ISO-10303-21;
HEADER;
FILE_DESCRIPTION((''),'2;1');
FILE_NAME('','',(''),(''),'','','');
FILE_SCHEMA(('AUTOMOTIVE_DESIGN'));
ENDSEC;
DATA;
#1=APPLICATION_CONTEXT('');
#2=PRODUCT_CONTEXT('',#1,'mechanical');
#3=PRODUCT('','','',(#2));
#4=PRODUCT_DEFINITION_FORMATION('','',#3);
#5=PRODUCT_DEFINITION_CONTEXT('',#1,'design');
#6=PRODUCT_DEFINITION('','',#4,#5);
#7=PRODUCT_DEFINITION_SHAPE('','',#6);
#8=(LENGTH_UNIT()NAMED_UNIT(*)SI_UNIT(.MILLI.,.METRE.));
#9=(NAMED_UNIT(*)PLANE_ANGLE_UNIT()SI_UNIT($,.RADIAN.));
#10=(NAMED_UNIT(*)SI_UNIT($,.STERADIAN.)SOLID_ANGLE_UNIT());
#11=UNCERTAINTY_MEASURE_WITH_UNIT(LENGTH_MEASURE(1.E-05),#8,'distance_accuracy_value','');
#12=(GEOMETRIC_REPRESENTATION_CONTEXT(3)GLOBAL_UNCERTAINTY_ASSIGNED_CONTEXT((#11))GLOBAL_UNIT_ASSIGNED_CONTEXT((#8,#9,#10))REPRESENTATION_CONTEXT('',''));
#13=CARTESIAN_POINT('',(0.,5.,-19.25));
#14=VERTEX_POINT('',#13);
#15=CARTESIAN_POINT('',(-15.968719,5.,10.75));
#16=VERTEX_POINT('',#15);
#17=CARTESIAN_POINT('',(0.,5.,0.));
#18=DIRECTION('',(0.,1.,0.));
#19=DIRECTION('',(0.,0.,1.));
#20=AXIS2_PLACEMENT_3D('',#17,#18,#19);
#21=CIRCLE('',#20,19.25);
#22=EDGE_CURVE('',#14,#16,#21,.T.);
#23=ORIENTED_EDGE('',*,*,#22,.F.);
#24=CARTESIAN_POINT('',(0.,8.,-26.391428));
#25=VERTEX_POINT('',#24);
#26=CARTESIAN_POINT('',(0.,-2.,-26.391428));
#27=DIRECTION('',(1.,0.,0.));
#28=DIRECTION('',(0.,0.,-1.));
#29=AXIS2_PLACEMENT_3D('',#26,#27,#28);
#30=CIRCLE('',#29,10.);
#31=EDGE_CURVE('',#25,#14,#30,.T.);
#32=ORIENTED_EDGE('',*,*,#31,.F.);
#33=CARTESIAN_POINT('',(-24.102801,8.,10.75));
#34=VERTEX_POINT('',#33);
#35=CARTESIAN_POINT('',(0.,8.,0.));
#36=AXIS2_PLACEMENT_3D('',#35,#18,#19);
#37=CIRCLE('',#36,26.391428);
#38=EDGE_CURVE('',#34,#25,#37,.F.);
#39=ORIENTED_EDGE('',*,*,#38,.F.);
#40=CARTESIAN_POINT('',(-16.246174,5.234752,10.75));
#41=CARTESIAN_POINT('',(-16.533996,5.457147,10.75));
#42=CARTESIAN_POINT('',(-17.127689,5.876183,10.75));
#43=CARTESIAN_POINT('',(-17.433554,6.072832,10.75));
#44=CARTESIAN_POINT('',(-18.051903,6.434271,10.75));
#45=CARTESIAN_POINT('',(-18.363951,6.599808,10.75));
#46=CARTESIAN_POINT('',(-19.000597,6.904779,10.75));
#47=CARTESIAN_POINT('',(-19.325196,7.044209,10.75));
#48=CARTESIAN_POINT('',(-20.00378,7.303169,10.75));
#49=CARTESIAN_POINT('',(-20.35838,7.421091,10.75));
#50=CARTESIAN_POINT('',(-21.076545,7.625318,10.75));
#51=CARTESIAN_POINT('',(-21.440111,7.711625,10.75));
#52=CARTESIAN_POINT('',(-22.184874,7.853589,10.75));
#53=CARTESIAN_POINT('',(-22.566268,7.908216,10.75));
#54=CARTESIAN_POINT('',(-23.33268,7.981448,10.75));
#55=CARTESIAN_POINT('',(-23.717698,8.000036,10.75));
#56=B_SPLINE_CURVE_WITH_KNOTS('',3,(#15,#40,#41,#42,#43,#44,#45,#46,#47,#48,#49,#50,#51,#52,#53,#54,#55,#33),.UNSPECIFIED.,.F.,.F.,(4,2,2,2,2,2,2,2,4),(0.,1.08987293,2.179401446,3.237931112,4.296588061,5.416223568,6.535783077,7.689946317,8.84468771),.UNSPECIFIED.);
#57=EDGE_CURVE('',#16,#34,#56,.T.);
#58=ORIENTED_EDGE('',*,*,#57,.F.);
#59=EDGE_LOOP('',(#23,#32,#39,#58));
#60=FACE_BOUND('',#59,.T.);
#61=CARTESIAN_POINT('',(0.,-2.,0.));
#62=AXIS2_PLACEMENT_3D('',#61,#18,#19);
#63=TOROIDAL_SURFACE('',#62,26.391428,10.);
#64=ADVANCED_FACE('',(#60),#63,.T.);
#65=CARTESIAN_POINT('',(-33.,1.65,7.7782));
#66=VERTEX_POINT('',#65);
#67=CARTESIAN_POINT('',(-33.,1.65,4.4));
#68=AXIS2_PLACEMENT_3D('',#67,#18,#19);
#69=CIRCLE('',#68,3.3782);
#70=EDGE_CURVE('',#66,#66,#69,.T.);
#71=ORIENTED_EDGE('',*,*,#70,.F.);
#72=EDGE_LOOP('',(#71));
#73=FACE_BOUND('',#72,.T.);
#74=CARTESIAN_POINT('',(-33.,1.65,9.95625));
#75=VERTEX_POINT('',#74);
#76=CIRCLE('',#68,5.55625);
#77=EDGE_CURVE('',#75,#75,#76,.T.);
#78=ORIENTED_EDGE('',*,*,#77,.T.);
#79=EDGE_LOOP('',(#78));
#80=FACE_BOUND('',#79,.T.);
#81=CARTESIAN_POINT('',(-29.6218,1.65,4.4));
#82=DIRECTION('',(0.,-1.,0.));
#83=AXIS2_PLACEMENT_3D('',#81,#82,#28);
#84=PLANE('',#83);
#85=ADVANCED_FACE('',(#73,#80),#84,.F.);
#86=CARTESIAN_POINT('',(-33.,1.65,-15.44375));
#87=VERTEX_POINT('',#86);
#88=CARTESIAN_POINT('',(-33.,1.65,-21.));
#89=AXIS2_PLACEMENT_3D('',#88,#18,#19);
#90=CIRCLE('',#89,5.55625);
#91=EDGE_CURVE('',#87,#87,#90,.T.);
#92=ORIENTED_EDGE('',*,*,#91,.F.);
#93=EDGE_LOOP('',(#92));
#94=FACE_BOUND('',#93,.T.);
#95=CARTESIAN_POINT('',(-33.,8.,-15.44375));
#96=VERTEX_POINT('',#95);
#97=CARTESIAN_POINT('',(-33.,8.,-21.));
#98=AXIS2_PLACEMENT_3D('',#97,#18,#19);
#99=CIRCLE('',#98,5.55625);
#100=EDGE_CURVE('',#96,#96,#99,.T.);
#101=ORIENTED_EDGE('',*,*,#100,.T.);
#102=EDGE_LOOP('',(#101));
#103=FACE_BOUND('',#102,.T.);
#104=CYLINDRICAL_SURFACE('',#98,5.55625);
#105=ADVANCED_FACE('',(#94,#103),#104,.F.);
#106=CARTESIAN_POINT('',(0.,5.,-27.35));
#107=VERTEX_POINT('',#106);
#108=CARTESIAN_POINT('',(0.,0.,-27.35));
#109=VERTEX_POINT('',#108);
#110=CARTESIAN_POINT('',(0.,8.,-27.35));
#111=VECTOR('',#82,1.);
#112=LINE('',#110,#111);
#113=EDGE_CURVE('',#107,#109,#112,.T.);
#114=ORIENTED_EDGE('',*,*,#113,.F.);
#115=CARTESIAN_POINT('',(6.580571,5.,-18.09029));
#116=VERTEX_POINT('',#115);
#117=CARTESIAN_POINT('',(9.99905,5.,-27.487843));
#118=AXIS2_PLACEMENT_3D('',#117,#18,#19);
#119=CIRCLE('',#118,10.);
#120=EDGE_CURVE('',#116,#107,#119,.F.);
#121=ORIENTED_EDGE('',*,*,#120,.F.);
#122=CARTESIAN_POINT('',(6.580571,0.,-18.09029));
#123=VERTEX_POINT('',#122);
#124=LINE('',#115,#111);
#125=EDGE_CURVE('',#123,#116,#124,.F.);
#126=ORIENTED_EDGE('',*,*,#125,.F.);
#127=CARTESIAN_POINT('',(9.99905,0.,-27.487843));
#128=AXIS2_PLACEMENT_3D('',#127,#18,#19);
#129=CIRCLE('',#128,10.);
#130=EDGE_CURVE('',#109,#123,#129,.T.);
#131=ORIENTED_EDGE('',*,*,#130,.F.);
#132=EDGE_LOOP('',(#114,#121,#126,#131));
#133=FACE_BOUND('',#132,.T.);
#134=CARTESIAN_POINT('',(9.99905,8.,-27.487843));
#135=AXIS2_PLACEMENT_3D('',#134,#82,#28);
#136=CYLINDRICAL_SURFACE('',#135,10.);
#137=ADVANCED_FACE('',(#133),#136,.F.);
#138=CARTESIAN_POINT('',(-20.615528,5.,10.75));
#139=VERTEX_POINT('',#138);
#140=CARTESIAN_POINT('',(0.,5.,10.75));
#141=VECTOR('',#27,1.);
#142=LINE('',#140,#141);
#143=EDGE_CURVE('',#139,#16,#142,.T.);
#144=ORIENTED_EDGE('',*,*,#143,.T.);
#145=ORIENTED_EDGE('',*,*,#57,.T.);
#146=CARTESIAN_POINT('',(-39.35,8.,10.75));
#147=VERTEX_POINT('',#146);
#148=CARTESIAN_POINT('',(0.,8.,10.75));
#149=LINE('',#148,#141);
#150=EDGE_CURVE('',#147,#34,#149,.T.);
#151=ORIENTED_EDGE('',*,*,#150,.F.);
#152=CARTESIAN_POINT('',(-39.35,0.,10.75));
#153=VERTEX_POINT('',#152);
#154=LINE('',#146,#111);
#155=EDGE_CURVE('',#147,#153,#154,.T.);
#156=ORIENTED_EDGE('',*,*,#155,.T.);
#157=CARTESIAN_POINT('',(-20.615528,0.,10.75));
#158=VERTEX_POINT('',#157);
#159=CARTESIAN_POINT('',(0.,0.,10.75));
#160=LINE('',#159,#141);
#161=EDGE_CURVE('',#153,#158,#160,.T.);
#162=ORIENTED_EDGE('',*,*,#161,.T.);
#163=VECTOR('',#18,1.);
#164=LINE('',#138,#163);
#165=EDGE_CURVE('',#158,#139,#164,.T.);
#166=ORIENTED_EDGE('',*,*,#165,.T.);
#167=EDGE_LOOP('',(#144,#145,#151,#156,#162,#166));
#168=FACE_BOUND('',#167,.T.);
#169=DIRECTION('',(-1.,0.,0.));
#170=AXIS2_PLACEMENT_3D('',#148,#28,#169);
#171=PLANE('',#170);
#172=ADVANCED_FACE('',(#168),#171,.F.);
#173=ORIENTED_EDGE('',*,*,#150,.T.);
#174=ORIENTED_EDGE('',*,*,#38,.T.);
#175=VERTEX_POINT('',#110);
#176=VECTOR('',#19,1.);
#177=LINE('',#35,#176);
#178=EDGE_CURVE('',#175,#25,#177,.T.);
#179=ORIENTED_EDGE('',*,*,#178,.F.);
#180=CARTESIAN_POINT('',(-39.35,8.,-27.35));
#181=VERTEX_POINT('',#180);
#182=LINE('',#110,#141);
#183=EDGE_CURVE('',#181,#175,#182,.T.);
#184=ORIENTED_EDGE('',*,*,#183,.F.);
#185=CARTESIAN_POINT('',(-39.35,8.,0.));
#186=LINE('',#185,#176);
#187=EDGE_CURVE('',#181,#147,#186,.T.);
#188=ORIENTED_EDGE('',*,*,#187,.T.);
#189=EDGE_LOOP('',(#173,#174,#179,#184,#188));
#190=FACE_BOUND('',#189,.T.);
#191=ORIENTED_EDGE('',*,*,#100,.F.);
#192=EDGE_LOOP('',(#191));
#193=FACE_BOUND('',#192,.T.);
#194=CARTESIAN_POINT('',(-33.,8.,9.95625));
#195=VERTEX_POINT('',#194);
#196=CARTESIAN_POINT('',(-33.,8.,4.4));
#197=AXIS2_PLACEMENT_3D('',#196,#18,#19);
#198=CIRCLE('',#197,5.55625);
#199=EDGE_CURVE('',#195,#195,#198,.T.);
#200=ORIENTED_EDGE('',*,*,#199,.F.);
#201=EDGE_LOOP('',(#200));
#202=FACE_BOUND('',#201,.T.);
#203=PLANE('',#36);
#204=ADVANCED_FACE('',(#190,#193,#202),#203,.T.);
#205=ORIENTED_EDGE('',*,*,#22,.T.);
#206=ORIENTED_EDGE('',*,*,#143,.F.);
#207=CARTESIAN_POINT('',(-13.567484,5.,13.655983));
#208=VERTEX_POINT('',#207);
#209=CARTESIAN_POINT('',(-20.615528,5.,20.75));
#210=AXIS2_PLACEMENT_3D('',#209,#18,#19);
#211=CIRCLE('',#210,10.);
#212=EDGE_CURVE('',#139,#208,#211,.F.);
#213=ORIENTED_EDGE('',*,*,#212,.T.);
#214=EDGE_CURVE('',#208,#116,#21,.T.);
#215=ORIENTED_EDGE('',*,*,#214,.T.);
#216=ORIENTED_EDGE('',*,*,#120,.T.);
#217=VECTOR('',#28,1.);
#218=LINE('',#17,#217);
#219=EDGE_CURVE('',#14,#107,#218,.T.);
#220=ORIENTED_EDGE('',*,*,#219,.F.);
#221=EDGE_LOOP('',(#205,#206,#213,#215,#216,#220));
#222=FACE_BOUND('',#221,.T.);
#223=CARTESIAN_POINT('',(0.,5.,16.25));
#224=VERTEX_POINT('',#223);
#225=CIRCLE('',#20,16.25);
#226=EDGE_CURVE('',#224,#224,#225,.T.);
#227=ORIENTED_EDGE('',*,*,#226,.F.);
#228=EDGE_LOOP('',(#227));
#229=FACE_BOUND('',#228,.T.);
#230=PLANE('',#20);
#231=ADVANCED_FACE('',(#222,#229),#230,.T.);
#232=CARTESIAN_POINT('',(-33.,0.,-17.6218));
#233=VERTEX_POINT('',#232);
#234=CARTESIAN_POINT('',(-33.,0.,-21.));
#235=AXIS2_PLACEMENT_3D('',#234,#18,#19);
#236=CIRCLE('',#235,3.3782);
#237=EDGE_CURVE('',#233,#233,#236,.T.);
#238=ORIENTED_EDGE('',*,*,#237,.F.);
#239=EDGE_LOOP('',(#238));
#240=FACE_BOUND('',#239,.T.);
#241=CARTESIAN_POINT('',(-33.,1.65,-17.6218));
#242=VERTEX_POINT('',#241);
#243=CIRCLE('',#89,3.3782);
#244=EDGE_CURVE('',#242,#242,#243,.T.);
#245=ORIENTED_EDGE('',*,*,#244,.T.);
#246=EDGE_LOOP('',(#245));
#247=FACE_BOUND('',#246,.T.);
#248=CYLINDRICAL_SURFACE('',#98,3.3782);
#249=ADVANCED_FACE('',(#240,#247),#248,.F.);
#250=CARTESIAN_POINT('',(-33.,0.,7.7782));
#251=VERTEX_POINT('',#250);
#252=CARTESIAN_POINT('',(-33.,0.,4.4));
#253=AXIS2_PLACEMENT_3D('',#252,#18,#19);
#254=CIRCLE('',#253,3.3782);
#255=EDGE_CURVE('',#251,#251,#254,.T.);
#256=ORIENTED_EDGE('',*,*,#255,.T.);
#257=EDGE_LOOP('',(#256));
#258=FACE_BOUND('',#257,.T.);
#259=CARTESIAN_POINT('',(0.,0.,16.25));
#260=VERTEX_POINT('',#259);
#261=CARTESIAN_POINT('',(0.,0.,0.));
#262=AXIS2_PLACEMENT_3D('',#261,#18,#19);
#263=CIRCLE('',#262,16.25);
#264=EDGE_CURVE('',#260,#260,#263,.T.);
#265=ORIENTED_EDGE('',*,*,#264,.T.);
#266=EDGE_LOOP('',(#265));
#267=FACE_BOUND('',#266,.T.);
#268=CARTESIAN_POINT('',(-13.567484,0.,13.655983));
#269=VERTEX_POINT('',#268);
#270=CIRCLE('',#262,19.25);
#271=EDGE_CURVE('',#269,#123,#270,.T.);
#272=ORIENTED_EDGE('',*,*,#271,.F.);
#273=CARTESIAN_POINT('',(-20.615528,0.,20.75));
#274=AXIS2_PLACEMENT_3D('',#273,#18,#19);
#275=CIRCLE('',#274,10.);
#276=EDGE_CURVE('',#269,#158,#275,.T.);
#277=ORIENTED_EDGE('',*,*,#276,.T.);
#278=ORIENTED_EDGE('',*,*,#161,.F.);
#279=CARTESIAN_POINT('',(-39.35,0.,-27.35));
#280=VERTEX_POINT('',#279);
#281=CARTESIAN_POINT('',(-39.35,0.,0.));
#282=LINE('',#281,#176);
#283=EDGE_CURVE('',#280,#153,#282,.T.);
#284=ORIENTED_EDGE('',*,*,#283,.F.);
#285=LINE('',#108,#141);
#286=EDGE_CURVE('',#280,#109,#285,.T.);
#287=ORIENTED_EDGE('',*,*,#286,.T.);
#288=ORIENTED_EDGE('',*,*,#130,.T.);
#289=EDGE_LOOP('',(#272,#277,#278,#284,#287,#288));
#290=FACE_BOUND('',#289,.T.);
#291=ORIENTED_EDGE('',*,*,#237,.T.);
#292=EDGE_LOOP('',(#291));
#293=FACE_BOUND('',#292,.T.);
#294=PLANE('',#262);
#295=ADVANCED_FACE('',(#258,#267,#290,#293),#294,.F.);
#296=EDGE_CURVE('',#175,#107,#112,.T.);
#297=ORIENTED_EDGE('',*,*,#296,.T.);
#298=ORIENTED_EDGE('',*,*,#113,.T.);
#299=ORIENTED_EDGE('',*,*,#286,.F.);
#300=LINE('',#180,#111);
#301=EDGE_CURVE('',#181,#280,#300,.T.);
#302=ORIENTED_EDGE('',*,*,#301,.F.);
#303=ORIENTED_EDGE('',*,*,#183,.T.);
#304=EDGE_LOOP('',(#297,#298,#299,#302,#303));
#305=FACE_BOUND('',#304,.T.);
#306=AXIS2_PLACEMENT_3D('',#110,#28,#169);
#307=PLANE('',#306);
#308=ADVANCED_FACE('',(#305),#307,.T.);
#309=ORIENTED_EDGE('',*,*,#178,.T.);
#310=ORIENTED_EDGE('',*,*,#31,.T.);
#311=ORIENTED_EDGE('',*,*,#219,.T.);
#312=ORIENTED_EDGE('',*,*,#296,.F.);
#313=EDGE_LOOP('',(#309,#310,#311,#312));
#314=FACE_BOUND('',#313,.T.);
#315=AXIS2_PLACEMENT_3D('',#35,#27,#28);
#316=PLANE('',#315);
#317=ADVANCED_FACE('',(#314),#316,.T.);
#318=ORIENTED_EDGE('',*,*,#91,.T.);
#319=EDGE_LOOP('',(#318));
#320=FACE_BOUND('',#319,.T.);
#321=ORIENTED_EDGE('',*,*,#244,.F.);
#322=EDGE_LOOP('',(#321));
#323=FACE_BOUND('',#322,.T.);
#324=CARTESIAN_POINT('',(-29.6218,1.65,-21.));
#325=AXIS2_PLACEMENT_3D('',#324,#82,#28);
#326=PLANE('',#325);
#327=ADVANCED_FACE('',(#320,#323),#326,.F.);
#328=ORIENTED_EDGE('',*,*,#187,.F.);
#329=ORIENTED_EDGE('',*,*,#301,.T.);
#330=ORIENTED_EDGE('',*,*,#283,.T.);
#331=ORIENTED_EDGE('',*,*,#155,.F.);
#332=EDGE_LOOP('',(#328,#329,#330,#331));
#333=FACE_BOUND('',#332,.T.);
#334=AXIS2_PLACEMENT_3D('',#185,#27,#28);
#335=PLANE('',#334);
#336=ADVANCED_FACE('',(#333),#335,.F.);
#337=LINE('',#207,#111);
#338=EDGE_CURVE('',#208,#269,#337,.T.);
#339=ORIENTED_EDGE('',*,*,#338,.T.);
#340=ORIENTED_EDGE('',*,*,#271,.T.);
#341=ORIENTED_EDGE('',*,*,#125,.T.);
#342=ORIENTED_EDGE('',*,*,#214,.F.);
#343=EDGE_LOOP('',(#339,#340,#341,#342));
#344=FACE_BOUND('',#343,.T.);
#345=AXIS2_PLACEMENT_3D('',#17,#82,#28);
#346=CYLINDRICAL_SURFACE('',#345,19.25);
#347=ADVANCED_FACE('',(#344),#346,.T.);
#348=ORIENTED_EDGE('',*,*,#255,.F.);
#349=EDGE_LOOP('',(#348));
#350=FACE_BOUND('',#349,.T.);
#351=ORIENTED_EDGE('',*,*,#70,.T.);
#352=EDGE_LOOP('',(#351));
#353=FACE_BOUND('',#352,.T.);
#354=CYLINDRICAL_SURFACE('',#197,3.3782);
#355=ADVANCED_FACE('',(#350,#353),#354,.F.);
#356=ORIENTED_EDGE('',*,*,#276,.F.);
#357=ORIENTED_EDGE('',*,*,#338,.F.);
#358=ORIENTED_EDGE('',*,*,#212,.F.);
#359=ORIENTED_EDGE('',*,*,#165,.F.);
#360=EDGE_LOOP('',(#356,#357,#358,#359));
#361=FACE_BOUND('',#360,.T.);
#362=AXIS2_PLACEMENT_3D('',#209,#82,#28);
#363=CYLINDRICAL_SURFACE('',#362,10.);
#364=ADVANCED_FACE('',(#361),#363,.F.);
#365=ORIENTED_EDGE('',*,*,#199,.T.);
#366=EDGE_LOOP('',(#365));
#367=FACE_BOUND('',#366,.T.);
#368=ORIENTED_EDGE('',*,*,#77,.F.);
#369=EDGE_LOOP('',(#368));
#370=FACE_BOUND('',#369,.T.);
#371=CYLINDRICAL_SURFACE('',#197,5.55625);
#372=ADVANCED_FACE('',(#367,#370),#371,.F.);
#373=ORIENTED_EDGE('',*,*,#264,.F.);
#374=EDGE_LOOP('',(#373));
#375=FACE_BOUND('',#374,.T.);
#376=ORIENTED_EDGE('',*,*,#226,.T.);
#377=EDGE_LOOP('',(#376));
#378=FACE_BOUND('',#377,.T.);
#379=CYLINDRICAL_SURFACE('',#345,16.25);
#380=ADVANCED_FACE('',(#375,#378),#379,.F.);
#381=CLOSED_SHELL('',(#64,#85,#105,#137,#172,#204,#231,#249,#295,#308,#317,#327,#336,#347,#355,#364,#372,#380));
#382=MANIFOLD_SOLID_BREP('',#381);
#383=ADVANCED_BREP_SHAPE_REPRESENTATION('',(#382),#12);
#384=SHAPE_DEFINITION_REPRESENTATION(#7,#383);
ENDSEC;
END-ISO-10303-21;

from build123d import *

# Parameters (mm, degrees)
SKETCH1_R                                        = 19.25
SKETCH1_R_2                                      = 16.25
BOSS_EXTRUDE1_DEPTH                              = 5
BOSS_EXTRUDE2_DEPTH                              = 8
CBORE_FOR_1_4_SOCKET_HEAD_CAP_SCREW1_D           = 6.7564
CBORE_FOR_1_4_SOCKET_HEAD_CAP_SCREW1_CBORE_D     = 11.1125
CBORE_FOR_1_4_SOCKET_HEAD_CAP_SCREW1_CBORE_DEPTH = 6.35
FILLET1_R                                        = 10


with BuildPart() as part:
    # Sketch1 → Boss-Extrude1 (new body)
    with BuildSketch(Plane(origin=(0, 0, 0), x_dir=(1, 0, 0), z_dir=(0, 1, 0))):
        with Locations(Location((0, 0, 0), (0, 0, 270))):
            Circle(SKETCH1_R)
        with Locations(Location((0, 0, 0), (0, 0, 270))):
            Circle(SKETCH1_R_2, mode=Mode.SUBTRACT)
    extrude(amount=BOSS_EXTRUDE1_DEPTH)

    # Sketch2 → Boss-Extrude2 (add)
    with BuildSketch(Plane(origin=(0, 0, 0), x_dir=(1, 0, 0), z_dir=(0, 1, 0))):
        with BuildLine():
            Line((0, 27.35), (-39.35, 27.35))
            Line((-39.35, 27.35), (-39.35, -10.75))
            Line((-39.35, -10.75), (-15.968719423, -10.75))
            ThreePointArc((-15.968719423, -10.75), (-16.992645468, 9.045026258), (0, 19.25))
            Line((0, 19.25), (0, 27.35))
        make_face()
    extrude(amount=BOSS_EXTRUDE2_DEPTH)

    # CBORE for 1/4 Socket Head Cap Screw1 (through all)
    with Locations(Plane(origin=(0, 8, 0), x_dir=(1, 0, 0), z_dir=(0, 1, 0))):
        with Locations((-33, 21), (-33, -4.4)):
            CounterBoreHole(CBORE_FOR_1_4_SOCKET_HEAD_CAP_SCREW1_D / 2, CBORE_FOR_1_4_SOCKET_HEAD_CAP_SCREW1_CBORE_D / 2, CBORE_FOR_1_4_SOCKET_HEAD_CAP_SCREW1_CBORE_DEPTH)

    # Fillet1
    # the kernel refuses this fillet: 10 mm, written as the material it adds along each edge
    with BuildSketch(Plane(origin=(-15.968719423, 0, 10.75), x_dir=(0.6369824352168134, 0, 0.7708783154462564), z_dir=(0, 1, 0))) as fillet1_piece_1:
        with BuildLine():
            CenterArc((4.748847629, -9.951948419), FILLET1_R, 95.619084045, 44.81374241)
            Line((-2.959935525, -3.582124067), (0, 0))
            ThreePointArc((0, 0), (1.884851894, -0.092499293), (3.769703788, 0))
        make_face()
    extrude(amount=5)
    with BuildSketch(Plane(origin=(0, 0, -19.25), x_dir=(0.984823666621771, 0, 0.1735579029075042), z_dir=(0, 1, 0))) as fillet1_piece_2:
        with BuildLine():
            CenterArc((8.417558291, 9.848236666), FILLET1_R, 190.784553847, 69.220698266)
            Line((-1.405819014, 7.9770717), (0, 0))
            ThreePointArc((0, 0), (3.340989631, 0.292144418), (6.681979262, 0))
        make_face()
    extrude(amount=5)
    # the kernel refuses this fillet: 10 mm, written as the material it takes off along each edge
    with BuildSketch(Plane(origin=(0, 8, 0), x_dir=(-0.05010434447284765, 0, 0.998743988550092), z_dir=(0.998743988550092, 0, 0.05010434447284765))) as fillet1_2_piece_1:
        with BuildLine():
            CenterArc((26.391428429, 10), FILLET1_R, 224.427004001, 45.572995999)
            Line((26.391428429, 0), (19.25, 0))
            Line((19.25, 0), (19.25, 3))
        make_face()
    revolve(axis=Axis((0, 8, 0), (0, -1, 0)), revolution_arc=230.307970534, mode=Mode.SUBTRACT)


solid = part.part
